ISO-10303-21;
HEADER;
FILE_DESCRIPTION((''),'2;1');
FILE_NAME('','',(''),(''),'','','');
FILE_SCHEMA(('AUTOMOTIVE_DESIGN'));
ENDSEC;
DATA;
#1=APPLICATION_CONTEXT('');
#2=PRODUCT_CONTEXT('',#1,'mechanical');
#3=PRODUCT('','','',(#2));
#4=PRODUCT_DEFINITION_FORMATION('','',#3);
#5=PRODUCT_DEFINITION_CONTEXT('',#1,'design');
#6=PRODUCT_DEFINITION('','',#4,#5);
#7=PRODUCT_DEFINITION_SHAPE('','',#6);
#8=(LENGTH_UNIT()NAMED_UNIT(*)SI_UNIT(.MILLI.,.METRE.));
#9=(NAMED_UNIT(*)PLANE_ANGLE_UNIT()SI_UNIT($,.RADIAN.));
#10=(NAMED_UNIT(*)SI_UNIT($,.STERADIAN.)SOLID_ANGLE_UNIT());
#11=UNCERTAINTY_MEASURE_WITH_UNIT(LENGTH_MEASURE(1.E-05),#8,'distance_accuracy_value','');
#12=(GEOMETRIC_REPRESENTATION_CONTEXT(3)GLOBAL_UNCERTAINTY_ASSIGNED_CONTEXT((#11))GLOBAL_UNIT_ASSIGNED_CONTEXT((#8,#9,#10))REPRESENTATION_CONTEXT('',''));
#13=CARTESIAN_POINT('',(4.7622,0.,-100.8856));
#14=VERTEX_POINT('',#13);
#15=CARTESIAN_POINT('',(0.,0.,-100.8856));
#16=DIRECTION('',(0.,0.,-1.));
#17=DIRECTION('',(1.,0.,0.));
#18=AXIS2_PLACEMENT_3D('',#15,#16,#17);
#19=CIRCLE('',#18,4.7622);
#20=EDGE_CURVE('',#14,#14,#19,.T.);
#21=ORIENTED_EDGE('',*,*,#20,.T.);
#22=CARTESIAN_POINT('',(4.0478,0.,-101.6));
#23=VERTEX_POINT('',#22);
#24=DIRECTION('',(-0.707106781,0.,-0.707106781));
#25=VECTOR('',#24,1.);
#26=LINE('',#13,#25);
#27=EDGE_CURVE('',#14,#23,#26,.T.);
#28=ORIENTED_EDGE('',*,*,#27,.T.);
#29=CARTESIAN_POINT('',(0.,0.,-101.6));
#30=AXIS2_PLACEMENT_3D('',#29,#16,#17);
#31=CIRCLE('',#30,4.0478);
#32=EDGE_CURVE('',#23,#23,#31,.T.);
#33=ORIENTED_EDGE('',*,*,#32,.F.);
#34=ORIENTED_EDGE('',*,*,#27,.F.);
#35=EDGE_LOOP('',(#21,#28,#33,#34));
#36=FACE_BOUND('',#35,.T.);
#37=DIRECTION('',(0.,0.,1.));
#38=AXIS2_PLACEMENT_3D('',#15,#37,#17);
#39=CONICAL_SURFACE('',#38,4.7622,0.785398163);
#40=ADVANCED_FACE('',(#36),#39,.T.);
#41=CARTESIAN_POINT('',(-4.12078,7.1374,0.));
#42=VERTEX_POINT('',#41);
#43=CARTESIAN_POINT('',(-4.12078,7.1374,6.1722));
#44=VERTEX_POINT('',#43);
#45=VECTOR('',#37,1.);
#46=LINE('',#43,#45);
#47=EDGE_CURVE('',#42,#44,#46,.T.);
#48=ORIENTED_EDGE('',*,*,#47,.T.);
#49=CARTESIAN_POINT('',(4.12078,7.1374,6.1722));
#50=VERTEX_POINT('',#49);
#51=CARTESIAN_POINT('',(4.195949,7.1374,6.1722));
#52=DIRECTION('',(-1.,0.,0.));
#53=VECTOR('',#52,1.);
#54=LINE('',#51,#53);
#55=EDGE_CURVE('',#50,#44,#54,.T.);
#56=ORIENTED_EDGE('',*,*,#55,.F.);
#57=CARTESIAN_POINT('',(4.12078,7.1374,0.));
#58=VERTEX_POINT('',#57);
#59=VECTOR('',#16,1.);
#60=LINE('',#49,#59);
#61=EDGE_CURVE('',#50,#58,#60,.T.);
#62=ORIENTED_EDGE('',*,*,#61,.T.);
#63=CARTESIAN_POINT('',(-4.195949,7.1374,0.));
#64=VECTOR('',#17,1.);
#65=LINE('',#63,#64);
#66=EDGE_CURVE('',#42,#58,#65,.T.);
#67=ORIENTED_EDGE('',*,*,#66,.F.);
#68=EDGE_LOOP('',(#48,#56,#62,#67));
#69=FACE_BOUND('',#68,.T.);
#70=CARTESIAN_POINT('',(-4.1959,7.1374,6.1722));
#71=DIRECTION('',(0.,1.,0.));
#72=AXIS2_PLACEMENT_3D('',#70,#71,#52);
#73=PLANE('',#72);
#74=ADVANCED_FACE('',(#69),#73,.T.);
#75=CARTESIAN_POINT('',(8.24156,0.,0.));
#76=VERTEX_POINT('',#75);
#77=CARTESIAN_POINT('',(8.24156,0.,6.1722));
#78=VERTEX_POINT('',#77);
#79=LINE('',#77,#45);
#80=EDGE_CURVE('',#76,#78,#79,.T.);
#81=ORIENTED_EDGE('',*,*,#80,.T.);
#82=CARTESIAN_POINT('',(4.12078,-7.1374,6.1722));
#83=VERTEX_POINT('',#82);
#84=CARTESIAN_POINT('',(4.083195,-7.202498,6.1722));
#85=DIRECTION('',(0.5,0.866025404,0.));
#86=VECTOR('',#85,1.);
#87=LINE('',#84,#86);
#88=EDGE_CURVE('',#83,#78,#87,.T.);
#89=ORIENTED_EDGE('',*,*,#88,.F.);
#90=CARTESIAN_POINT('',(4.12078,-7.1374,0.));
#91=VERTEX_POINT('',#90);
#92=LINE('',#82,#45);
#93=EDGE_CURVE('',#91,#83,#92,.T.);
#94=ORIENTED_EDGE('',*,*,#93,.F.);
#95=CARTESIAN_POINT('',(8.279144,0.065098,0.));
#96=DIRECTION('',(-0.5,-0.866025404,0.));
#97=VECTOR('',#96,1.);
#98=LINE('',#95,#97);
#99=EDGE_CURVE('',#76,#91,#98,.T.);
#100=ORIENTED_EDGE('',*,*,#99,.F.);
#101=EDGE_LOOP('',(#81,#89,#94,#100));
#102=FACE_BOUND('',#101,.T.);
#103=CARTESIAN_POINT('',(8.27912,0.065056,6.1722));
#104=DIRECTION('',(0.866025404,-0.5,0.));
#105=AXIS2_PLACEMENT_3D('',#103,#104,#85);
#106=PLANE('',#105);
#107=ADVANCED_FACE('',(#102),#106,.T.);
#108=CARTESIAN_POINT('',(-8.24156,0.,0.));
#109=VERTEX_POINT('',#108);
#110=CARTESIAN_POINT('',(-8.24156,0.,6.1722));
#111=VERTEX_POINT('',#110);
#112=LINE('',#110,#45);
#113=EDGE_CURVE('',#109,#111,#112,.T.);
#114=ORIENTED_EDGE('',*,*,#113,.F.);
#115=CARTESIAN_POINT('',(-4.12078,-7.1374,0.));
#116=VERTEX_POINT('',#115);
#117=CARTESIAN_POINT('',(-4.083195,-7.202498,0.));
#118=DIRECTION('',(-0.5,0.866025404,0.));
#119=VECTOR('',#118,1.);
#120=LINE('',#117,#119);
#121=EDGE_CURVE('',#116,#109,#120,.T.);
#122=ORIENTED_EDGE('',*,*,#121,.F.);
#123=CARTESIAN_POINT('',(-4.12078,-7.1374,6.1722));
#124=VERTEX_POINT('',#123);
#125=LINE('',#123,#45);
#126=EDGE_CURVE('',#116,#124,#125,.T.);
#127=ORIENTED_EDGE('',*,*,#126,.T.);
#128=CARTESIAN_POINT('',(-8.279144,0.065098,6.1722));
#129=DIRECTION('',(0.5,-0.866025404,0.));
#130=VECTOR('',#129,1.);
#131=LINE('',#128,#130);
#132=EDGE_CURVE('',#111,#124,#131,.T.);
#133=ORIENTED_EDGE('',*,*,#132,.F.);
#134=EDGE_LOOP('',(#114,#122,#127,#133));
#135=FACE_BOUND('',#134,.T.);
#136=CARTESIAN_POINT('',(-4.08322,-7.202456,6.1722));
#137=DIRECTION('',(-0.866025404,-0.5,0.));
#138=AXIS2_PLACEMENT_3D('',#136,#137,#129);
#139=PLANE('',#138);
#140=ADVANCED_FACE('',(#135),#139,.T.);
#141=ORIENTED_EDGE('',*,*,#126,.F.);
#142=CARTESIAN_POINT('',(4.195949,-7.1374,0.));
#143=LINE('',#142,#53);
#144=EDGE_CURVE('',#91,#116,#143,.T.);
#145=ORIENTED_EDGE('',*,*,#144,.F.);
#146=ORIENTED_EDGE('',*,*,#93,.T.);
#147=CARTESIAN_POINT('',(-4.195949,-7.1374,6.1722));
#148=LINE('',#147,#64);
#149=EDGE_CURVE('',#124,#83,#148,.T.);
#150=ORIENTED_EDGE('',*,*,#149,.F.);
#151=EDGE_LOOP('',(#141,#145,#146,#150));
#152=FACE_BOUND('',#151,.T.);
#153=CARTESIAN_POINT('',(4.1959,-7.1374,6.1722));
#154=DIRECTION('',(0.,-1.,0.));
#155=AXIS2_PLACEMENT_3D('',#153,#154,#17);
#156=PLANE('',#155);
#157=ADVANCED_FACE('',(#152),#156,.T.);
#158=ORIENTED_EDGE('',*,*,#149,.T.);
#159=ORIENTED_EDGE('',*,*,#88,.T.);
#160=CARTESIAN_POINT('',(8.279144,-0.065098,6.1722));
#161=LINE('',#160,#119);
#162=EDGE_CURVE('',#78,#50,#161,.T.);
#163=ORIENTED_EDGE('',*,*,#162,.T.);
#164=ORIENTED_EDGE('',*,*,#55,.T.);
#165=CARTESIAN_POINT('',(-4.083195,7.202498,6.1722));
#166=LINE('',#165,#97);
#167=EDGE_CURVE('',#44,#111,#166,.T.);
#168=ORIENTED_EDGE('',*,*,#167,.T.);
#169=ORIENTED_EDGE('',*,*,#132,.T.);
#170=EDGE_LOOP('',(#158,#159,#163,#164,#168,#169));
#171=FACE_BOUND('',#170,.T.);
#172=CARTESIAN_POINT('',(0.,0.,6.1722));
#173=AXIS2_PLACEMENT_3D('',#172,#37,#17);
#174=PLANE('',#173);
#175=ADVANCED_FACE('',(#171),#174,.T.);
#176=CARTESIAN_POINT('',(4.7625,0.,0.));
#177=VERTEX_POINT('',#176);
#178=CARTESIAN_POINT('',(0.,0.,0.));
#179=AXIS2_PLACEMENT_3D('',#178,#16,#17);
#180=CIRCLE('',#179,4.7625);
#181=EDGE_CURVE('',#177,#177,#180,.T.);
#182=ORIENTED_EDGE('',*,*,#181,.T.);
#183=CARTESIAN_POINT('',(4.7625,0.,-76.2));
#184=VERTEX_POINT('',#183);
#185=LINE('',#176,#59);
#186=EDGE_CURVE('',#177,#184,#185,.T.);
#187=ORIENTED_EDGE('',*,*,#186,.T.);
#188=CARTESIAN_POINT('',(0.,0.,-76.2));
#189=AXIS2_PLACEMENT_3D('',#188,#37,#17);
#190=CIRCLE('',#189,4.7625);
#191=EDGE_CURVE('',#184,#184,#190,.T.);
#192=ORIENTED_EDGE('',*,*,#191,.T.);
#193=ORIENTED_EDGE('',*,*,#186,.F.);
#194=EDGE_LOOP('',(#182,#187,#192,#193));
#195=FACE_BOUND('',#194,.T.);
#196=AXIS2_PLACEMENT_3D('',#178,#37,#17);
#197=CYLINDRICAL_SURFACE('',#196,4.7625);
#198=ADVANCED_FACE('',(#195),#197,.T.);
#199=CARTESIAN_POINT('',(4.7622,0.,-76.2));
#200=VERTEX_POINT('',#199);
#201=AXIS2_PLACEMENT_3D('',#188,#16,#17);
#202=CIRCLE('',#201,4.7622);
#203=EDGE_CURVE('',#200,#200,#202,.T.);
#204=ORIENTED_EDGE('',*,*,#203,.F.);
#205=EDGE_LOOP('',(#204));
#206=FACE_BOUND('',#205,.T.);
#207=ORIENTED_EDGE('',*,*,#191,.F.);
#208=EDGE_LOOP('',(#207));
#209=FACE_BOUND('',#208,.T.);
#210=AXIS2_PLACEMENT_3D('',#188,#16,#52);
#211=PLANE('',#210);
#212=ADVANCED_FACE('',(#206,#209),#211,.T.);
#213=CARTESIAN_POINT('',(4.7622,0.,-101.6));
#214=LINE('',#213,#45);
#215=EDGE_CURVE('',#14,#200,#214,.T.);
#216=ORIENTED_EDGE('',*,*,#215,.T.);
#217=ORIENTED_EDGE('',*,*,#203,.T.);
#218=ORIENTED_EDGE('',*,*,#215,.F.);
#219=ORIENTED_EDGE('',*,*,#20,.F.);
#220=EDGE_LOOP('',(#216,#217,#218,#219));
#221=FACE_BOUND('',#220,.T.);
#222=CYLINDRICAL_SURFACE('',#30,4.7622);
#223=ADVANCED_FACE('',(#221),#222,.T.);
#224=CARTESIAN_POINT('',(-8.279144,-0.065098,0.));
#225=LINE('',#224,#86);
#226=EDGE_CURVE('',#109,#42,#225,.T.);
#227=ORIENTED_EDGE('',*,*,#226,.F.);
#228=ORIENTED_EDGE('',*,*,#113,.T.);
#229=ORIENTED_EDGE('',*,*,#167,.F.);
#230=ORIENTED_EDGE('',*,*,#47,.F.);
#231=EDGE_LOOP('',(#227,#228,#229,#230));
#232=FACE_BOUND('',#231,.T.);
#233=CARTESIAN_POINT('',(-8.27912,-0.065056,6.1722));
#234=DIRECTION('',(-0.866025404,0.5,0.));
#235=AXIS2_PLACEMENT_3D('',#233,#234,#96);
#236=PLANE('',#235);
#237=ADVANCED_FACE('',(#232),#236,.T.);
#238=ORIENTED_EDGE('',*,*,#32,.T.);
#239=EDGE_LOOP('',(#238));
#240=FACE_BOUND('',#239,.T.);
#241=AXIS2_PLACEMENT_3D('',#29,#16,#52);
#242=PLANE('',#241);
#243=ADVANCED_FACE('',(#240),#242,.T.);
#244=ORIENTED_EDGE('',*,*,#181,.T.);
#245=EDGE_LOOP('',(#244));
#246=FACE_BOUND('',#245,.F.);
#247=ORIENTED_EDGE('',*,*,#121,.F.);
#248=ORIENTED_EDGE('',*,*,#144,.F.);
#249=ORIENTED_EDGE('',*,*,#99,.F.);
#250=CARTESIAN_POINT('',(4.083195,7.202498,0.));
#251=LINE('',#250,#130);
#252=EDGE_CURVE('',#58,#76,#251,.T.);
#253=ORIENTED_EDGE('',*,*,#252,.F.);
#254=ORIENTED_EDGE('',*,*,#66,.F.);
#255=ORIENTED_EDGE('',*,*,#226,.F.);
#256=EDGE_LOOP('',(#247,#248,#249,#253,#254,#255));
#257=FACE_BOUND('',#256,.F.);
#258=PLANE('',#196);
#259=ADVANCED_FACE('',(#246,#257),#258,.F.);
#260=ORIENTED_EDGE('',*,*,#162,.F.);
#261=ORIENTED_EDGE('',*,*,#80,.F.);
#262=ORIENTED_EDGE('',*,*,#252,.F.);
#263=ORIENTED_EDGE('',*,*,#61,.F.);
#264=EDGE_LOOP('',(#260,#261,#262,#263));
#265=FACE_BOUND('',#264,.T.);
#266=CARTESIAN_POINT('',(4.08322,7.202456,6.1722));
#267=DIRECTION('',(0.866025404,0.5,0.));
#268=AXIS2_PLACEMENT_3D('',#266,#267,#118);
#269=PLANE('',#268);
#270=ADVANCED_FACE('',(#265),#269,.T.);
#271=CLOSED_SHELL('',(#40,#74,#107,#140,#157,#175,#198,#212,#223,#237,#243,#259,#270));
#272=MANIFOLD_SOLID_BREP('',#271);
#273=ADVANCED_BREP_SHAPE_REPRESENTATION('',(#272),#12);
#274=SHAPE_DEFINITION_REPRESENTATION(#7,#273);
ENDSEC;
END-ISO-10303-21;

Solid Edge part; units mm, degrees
sketch "Sketch1" plane through (0, 0, 0) normal (0, 0, 1) x (1, 0, 0)
  circle A0 centre (0, 0) radius 8.2794
  dimension "D1" = 16.5588
extrude "Protrusion1" add sketch "Sketch1" along normal blind 6.1722
sketch "Sketch2" plane through (0, 0, 0) normal (0, 0, -1) x (1, 0, 0)
  circle A0 centre (0, 0) radius 4.7625
extrude "Protrusion2" add sketch "Sketch2" along normal blind 101.6
sketch "Sketch3" plane through (0, 0, -101.6) normal (0, 0, -1) x (1, 0, 0)
  circle A0 centre (0, 0) radius 4.7622
extrude "Cutout1" cut sketch "Sketch3" against normal blind 25.4 flip side to cut
chamfer "Chamfer_1" distance 0.7144 angle 45 1 edges at (-4.7622, 0, -101.6)
sketch "Sketch4" plane through (0, 0, 6.1722) normal (0, 0, 1) x (1, 0, 0)
  line L0 (-4.1959, 7.1374) -> (4.1959, 7.1374)
  dimension "D1" = 14.2748
extrude "Cutout2" cut sketch "Sketch4" against normal up to next material side at (0, 7.1874, 6.1722)
pattern_circular "Pattern1" count 6 over 360 about axis through (0, 0, 6.1722) along (0, 0, 1) of "Cutout2"
properties part number "24100020"
